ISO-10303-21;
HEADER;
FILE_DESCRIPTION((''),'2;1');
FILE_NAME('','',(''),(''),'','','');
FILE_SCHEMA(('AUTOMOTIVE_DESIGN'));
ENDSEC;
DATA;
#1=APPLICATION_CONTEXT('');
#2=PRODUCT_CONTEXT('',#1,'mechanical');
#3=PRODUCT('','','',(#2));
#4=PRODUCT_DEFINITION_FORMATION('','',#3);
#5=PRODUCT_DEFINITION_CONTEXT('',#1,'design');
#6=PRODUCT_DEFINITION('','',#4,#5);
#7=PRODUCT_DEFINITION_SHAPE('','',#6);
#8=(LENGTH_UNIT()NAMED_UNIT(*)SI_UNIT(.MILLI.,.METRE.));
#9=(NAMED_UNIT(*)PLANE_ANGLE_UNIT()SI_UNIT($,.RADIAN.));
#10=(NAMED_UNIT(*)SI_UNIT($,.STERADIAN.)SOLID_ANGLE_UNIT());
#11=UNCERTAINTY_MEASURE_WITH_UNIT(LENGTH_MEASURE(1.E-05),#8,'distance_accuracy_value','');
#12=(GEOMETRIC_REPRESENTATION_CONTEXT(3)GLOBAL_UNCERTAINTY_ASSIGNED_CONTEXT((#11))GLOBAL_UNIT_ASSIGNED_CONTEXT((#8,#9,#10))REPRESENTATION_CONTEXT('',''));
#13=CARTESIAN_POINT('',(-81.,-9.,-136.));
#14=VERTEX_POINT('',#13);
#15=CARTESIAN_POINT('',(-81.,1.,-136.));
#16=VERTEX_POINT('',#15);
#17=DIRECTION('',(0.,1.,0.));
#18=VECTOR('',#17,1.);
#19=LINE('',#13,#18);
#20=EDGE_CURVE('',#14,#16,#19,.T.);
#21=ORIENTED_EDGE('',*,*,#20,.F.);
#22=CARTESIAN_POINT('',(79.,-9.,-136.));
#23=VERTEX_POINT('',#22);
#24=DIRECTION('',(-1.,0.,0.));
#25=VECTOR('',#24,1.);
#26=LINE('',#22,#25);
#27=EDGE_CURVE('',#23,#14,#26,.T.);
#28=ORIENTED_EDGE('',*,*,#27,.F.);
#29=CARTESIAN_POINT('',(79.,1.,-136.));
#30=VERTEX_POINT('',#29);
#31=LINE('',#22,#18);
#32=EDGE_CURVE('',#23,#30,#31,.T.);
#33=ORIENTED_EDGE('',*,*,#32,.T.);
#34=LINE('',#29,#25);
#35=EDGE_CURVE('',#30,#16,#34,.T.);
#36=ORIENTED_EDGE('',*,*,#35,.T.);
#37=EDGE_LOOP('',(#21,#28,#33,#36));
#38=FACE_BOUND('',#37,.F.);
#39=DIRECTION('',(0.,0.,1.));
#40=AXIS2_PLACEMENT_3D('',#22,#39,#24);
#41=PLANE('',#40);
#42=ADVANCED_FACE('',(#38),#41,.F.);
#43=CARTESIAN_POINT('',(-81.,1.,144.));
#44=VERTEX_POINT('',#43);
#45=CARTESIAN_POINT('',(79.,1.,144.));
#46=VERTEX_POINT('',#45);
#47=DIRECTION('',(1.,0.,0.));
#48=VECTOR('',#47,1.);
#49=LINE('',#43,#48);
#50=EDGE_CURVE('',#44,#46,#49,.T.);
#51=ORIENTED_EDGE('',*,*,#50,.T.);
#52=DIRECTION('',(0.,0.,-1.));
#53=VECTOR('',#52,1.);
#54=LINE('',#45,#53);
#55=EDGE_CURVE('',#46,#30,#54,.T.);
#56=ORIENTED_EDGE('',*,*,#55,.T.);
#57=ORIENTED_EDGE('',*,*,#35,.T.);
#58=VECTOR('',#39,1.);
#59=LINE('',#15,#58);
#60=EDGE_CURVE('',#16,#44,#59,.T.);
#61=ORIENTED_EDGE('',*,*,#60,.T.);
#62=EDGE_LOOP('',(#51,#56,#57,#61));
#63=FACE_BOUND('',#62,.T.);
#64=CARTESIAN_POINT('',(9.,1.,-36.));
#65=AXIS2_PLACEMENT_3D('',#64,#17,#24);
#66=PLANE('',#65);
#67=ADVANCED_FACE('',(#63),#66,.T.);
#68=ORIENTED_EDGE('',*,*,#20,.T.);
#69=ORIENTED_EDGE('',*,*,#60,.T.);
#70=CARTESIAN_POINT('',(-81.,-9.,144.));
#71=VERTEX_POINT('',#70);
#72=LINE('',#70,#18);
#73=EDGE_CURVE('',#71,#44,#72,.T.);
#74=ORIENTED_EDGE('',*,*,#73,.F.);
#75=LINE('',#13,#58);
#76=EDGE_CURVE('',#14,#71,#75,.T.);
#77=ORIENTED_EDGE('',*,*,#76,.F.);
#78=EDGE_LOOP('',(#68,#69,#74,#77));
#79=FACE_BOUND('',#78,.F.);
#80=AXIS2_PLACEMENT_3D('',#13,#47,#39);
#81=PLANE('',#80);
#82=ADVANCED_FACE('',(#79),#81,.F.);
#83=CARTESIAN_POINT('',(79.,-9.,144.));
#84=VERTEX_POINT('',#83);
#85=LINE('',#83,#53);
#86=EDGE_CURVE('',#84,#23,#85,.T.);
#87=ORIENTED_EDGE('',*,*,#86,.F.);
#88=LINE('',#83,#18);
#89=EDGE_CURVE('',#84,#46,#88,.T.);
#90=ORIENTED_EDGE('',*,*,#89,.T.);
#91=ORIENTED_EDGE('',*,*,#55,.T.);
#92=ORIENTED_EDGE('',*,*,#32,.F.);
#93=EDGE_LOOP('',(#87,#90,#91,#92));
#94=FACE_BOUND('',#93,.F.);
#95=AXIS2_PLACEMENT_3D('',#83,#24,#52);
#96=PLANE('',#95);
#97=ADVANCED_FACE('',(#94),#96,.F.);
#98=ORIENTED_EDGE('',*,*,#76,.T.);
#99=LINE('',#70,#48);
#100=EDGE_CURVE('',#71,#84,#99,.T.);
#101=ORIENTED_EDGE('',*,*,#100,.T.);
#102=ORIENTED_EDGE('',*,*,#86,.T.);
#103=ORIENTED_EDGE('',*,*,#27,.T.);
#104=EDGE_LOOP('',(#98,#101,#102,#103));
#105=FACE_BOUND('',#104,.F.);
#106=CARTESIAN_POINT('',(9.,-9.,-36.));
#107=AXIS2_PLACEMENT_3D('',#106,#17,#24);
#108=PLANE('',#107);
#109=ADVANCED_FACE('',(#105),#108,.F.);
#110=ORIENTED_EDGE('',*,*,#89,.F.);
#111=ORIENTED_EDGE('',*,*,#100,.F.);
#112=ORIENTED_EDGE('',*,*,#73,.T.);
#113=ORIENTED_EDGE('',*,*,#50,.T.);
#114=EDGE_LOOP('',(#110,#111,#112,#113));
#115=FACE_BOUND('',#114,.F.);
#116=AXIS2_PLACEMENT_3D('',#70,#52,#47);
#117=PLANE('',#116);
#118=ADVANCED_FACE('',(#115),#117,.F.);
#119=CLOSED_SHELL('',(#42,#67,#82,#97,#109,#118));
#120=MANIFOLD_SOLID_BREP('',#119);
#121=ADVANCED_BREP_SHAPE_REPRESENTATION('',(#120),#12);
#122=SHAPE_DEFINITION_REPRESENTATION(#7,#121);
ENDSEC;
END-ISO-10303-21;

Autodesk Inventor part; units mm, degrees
ref_plane "YZ Plane" through (0, 0, 0) normal (1, 0, 0) x (0, 1, 0)
ref_plane "XZ Plane" through (0, 0, 0) normal (0, 1, 0) x (-1, 0, 0)
ref_plane "XY Plane" through (0, 0, 0) normal (0, 0, 1) x (1, 0, 0)
sketch "Sketch1" plane through (0, 0, 0) normal (0, 1, 0) x (-1, 0, 0)
  line L0 (9, 18) -> (-7, 18)
  line L1 (-7, 18) -> (-7, -10)
  line L2 (-7, -10) -> (9, -10)
  line L3 (9, -10) -> (9, 18)
  point P0 (0, 0)
extrude "Extrusion1" add sketch "Sketch1" along normal blind 1
sketch "Sketch2" plane through (0, 1, 0) normal (0, 1, 0) x (1, 0, 0)
  point P0 (0, 0)
scale "Scale1" factors (10, 10, 10) then translate (9, -9, -36) bodies 1
scale "Scale2" factors (10, 10, 10) then translate (9, -9, -36) bodies 1
scale "Scale3" factors (0.1, 0.1, 0.1) then translate (-0.9, 0.9, 3.6) bodies 1
properties part number "caseing"
